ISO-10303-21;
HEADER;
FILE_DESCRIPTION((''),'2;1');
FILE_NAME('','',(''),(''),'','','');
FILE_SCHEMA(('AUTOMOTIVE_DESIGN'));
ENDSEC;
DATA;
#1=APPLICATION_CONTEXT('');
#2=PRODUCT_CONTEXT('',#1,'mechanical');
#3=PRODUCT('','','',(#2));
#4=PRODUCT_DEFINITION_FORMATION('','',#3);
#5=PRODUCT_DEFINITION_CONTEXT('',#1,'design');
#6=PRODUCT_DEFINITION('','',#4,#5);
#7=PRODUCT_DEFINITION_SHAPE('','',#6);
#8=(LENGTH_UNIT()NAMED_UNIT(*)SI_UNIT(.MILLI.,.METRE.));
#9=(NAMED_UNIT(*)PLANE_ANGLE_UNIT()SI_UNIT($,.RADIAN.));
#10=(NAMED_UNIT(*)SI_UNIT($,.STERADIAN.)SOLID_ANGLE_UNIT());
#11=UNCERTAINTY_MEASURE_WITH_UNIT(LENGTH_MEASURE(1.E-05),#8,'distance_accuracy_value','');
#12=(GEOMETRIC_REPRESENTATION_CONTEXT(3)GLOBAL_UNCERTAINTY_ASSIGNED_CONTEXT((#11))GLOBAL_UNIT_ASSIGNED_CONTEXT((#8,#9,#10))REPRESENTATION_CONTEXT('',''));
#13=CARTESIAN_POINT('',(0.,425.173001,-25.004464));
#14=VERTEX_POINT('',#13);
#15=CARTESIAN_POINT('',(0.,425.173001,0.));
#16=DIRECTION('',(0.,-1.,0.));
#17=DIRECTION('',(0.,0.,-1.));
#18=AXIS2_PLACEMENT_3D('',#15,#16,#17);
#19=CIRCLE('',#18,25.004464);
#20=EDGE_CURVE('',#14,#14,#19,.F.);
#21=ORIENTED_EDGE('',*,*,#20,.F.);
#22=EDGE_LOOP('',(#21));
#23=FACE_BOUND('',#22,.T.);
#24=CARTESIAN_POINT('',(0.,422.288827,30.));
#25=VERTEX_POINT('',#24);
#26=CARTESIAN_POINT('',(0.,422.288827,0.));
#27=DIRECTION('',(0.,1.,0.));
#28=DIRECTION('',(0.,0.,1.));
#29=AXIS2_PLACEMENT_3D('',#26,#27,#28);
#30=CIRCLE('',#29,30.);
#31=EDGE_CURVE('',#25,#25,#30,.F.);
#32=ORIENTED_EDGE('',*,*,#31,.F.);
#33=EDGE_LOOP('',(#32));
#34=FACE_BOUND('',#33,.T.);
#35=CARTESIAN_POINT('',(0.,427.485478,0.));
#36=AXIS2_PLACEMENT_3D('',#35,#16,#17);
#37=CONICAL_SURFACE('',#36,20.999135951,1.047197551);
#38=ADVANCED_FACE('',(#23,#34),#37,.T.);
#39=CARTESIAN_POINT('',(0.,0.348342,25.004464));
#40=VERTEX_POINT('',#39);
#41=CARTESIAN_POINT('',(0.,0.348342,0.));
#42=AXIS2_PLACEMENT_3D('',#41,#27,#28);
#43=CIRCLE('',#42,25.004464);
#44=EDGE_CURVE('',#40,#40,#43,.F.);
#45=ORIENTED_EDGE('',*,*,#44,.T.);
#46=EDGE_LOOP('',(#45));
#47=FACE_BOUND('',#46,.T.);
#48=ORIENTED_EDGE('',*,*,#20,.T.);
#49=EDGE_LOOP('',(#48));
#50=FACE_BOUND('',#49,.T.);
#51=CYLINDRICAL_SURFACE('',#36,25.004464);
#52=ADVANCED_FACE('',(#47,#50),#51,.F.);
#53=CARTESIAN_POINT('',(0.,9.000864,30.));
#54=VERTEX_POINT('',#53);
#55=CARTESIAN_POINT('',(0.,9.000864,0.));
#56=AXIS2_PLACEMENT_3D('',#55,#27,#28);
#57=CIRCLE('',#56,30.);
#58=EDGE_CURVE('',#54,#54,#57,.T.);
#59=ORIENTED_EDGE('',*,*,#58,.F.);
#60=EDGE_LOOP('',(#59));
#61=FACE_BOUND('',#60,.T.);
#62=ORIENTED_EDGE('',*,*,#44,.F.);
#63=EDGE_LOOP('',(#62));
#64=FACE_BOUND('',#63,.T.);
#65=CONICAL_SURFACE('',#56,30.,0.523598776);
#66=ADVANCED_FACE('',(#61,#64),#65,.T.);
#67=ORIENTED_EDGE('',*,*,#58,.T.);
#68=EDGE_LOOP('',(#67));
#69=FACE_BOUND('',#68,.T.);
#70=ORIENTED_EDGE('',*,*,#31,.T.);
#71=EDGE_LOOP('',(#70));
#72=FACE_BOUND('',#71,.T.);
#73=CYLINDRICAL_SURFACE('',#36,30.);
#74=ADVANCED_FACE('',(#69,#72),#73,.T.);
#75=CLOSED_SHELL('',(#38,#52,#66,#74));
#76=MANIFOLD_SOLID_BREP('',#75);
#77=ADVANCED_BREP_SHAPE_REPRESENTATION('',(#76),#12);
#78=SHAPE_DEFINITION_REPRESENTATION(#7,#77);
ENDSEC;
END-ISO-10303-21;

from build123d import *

# Parameters (mm, degrees)
SKETCH1_R           = 30
BOSS_EXTRUDE1_DEPTH = 427.485478
SKETCH2_R           = 25.004464226
CUT_EXTRUDE1_DEPTH  = 430.585653742


with BuildPart() as part:
    # Sketch1 → Boss-Extrude1 (new body)
    with BuildSketch(Plane(origin=(0, 0, 0), x_dir=(1, 0, 0), z_dir=(0, 1, 0))):
        with Locations(Location((0, 0, 0), (0, 0, 270))):
            Circle(SKETCH1_R)
    extrude(amount=BOSS_EXTRUDE1_DEPTH)

    # Sketch2 → Cut-Extrude1 (cut, through all)
    with BuildSketch(Plane(origin=(0, 0, 0), x_dir=(1, 0, 0), z_dir=(0, 1, 0))):
        with Locations(Location((0, 0, 0), (0, 0, 270))):
            Circle(SKETCH2_R)
    extrude(amount=CUT_EXTRUDE1_DEPTH, mode=Mode.SUBTRACT)

    # Chamfer1: read off the stored shape, not the designer's step
    # Chamfer1 outline → Chamfer1 (revolve, cut)
    with BuildSketch(Plane.XY):
        Polygon((30, 422.288826614), (30, 427.485477895), (25.004464226, 427.485477895), (25.004464226, 425.173000538), align=None)
        Polygon((30, 9.000864049), (25.004464226, 0.348342277), (25.004464226, 0), (30, 0), align=None)
    revolve(axis=Axis((0, 0, 0), (0, 1, 0)), mode=Mode.SUBTRACT)


solid = part.part
